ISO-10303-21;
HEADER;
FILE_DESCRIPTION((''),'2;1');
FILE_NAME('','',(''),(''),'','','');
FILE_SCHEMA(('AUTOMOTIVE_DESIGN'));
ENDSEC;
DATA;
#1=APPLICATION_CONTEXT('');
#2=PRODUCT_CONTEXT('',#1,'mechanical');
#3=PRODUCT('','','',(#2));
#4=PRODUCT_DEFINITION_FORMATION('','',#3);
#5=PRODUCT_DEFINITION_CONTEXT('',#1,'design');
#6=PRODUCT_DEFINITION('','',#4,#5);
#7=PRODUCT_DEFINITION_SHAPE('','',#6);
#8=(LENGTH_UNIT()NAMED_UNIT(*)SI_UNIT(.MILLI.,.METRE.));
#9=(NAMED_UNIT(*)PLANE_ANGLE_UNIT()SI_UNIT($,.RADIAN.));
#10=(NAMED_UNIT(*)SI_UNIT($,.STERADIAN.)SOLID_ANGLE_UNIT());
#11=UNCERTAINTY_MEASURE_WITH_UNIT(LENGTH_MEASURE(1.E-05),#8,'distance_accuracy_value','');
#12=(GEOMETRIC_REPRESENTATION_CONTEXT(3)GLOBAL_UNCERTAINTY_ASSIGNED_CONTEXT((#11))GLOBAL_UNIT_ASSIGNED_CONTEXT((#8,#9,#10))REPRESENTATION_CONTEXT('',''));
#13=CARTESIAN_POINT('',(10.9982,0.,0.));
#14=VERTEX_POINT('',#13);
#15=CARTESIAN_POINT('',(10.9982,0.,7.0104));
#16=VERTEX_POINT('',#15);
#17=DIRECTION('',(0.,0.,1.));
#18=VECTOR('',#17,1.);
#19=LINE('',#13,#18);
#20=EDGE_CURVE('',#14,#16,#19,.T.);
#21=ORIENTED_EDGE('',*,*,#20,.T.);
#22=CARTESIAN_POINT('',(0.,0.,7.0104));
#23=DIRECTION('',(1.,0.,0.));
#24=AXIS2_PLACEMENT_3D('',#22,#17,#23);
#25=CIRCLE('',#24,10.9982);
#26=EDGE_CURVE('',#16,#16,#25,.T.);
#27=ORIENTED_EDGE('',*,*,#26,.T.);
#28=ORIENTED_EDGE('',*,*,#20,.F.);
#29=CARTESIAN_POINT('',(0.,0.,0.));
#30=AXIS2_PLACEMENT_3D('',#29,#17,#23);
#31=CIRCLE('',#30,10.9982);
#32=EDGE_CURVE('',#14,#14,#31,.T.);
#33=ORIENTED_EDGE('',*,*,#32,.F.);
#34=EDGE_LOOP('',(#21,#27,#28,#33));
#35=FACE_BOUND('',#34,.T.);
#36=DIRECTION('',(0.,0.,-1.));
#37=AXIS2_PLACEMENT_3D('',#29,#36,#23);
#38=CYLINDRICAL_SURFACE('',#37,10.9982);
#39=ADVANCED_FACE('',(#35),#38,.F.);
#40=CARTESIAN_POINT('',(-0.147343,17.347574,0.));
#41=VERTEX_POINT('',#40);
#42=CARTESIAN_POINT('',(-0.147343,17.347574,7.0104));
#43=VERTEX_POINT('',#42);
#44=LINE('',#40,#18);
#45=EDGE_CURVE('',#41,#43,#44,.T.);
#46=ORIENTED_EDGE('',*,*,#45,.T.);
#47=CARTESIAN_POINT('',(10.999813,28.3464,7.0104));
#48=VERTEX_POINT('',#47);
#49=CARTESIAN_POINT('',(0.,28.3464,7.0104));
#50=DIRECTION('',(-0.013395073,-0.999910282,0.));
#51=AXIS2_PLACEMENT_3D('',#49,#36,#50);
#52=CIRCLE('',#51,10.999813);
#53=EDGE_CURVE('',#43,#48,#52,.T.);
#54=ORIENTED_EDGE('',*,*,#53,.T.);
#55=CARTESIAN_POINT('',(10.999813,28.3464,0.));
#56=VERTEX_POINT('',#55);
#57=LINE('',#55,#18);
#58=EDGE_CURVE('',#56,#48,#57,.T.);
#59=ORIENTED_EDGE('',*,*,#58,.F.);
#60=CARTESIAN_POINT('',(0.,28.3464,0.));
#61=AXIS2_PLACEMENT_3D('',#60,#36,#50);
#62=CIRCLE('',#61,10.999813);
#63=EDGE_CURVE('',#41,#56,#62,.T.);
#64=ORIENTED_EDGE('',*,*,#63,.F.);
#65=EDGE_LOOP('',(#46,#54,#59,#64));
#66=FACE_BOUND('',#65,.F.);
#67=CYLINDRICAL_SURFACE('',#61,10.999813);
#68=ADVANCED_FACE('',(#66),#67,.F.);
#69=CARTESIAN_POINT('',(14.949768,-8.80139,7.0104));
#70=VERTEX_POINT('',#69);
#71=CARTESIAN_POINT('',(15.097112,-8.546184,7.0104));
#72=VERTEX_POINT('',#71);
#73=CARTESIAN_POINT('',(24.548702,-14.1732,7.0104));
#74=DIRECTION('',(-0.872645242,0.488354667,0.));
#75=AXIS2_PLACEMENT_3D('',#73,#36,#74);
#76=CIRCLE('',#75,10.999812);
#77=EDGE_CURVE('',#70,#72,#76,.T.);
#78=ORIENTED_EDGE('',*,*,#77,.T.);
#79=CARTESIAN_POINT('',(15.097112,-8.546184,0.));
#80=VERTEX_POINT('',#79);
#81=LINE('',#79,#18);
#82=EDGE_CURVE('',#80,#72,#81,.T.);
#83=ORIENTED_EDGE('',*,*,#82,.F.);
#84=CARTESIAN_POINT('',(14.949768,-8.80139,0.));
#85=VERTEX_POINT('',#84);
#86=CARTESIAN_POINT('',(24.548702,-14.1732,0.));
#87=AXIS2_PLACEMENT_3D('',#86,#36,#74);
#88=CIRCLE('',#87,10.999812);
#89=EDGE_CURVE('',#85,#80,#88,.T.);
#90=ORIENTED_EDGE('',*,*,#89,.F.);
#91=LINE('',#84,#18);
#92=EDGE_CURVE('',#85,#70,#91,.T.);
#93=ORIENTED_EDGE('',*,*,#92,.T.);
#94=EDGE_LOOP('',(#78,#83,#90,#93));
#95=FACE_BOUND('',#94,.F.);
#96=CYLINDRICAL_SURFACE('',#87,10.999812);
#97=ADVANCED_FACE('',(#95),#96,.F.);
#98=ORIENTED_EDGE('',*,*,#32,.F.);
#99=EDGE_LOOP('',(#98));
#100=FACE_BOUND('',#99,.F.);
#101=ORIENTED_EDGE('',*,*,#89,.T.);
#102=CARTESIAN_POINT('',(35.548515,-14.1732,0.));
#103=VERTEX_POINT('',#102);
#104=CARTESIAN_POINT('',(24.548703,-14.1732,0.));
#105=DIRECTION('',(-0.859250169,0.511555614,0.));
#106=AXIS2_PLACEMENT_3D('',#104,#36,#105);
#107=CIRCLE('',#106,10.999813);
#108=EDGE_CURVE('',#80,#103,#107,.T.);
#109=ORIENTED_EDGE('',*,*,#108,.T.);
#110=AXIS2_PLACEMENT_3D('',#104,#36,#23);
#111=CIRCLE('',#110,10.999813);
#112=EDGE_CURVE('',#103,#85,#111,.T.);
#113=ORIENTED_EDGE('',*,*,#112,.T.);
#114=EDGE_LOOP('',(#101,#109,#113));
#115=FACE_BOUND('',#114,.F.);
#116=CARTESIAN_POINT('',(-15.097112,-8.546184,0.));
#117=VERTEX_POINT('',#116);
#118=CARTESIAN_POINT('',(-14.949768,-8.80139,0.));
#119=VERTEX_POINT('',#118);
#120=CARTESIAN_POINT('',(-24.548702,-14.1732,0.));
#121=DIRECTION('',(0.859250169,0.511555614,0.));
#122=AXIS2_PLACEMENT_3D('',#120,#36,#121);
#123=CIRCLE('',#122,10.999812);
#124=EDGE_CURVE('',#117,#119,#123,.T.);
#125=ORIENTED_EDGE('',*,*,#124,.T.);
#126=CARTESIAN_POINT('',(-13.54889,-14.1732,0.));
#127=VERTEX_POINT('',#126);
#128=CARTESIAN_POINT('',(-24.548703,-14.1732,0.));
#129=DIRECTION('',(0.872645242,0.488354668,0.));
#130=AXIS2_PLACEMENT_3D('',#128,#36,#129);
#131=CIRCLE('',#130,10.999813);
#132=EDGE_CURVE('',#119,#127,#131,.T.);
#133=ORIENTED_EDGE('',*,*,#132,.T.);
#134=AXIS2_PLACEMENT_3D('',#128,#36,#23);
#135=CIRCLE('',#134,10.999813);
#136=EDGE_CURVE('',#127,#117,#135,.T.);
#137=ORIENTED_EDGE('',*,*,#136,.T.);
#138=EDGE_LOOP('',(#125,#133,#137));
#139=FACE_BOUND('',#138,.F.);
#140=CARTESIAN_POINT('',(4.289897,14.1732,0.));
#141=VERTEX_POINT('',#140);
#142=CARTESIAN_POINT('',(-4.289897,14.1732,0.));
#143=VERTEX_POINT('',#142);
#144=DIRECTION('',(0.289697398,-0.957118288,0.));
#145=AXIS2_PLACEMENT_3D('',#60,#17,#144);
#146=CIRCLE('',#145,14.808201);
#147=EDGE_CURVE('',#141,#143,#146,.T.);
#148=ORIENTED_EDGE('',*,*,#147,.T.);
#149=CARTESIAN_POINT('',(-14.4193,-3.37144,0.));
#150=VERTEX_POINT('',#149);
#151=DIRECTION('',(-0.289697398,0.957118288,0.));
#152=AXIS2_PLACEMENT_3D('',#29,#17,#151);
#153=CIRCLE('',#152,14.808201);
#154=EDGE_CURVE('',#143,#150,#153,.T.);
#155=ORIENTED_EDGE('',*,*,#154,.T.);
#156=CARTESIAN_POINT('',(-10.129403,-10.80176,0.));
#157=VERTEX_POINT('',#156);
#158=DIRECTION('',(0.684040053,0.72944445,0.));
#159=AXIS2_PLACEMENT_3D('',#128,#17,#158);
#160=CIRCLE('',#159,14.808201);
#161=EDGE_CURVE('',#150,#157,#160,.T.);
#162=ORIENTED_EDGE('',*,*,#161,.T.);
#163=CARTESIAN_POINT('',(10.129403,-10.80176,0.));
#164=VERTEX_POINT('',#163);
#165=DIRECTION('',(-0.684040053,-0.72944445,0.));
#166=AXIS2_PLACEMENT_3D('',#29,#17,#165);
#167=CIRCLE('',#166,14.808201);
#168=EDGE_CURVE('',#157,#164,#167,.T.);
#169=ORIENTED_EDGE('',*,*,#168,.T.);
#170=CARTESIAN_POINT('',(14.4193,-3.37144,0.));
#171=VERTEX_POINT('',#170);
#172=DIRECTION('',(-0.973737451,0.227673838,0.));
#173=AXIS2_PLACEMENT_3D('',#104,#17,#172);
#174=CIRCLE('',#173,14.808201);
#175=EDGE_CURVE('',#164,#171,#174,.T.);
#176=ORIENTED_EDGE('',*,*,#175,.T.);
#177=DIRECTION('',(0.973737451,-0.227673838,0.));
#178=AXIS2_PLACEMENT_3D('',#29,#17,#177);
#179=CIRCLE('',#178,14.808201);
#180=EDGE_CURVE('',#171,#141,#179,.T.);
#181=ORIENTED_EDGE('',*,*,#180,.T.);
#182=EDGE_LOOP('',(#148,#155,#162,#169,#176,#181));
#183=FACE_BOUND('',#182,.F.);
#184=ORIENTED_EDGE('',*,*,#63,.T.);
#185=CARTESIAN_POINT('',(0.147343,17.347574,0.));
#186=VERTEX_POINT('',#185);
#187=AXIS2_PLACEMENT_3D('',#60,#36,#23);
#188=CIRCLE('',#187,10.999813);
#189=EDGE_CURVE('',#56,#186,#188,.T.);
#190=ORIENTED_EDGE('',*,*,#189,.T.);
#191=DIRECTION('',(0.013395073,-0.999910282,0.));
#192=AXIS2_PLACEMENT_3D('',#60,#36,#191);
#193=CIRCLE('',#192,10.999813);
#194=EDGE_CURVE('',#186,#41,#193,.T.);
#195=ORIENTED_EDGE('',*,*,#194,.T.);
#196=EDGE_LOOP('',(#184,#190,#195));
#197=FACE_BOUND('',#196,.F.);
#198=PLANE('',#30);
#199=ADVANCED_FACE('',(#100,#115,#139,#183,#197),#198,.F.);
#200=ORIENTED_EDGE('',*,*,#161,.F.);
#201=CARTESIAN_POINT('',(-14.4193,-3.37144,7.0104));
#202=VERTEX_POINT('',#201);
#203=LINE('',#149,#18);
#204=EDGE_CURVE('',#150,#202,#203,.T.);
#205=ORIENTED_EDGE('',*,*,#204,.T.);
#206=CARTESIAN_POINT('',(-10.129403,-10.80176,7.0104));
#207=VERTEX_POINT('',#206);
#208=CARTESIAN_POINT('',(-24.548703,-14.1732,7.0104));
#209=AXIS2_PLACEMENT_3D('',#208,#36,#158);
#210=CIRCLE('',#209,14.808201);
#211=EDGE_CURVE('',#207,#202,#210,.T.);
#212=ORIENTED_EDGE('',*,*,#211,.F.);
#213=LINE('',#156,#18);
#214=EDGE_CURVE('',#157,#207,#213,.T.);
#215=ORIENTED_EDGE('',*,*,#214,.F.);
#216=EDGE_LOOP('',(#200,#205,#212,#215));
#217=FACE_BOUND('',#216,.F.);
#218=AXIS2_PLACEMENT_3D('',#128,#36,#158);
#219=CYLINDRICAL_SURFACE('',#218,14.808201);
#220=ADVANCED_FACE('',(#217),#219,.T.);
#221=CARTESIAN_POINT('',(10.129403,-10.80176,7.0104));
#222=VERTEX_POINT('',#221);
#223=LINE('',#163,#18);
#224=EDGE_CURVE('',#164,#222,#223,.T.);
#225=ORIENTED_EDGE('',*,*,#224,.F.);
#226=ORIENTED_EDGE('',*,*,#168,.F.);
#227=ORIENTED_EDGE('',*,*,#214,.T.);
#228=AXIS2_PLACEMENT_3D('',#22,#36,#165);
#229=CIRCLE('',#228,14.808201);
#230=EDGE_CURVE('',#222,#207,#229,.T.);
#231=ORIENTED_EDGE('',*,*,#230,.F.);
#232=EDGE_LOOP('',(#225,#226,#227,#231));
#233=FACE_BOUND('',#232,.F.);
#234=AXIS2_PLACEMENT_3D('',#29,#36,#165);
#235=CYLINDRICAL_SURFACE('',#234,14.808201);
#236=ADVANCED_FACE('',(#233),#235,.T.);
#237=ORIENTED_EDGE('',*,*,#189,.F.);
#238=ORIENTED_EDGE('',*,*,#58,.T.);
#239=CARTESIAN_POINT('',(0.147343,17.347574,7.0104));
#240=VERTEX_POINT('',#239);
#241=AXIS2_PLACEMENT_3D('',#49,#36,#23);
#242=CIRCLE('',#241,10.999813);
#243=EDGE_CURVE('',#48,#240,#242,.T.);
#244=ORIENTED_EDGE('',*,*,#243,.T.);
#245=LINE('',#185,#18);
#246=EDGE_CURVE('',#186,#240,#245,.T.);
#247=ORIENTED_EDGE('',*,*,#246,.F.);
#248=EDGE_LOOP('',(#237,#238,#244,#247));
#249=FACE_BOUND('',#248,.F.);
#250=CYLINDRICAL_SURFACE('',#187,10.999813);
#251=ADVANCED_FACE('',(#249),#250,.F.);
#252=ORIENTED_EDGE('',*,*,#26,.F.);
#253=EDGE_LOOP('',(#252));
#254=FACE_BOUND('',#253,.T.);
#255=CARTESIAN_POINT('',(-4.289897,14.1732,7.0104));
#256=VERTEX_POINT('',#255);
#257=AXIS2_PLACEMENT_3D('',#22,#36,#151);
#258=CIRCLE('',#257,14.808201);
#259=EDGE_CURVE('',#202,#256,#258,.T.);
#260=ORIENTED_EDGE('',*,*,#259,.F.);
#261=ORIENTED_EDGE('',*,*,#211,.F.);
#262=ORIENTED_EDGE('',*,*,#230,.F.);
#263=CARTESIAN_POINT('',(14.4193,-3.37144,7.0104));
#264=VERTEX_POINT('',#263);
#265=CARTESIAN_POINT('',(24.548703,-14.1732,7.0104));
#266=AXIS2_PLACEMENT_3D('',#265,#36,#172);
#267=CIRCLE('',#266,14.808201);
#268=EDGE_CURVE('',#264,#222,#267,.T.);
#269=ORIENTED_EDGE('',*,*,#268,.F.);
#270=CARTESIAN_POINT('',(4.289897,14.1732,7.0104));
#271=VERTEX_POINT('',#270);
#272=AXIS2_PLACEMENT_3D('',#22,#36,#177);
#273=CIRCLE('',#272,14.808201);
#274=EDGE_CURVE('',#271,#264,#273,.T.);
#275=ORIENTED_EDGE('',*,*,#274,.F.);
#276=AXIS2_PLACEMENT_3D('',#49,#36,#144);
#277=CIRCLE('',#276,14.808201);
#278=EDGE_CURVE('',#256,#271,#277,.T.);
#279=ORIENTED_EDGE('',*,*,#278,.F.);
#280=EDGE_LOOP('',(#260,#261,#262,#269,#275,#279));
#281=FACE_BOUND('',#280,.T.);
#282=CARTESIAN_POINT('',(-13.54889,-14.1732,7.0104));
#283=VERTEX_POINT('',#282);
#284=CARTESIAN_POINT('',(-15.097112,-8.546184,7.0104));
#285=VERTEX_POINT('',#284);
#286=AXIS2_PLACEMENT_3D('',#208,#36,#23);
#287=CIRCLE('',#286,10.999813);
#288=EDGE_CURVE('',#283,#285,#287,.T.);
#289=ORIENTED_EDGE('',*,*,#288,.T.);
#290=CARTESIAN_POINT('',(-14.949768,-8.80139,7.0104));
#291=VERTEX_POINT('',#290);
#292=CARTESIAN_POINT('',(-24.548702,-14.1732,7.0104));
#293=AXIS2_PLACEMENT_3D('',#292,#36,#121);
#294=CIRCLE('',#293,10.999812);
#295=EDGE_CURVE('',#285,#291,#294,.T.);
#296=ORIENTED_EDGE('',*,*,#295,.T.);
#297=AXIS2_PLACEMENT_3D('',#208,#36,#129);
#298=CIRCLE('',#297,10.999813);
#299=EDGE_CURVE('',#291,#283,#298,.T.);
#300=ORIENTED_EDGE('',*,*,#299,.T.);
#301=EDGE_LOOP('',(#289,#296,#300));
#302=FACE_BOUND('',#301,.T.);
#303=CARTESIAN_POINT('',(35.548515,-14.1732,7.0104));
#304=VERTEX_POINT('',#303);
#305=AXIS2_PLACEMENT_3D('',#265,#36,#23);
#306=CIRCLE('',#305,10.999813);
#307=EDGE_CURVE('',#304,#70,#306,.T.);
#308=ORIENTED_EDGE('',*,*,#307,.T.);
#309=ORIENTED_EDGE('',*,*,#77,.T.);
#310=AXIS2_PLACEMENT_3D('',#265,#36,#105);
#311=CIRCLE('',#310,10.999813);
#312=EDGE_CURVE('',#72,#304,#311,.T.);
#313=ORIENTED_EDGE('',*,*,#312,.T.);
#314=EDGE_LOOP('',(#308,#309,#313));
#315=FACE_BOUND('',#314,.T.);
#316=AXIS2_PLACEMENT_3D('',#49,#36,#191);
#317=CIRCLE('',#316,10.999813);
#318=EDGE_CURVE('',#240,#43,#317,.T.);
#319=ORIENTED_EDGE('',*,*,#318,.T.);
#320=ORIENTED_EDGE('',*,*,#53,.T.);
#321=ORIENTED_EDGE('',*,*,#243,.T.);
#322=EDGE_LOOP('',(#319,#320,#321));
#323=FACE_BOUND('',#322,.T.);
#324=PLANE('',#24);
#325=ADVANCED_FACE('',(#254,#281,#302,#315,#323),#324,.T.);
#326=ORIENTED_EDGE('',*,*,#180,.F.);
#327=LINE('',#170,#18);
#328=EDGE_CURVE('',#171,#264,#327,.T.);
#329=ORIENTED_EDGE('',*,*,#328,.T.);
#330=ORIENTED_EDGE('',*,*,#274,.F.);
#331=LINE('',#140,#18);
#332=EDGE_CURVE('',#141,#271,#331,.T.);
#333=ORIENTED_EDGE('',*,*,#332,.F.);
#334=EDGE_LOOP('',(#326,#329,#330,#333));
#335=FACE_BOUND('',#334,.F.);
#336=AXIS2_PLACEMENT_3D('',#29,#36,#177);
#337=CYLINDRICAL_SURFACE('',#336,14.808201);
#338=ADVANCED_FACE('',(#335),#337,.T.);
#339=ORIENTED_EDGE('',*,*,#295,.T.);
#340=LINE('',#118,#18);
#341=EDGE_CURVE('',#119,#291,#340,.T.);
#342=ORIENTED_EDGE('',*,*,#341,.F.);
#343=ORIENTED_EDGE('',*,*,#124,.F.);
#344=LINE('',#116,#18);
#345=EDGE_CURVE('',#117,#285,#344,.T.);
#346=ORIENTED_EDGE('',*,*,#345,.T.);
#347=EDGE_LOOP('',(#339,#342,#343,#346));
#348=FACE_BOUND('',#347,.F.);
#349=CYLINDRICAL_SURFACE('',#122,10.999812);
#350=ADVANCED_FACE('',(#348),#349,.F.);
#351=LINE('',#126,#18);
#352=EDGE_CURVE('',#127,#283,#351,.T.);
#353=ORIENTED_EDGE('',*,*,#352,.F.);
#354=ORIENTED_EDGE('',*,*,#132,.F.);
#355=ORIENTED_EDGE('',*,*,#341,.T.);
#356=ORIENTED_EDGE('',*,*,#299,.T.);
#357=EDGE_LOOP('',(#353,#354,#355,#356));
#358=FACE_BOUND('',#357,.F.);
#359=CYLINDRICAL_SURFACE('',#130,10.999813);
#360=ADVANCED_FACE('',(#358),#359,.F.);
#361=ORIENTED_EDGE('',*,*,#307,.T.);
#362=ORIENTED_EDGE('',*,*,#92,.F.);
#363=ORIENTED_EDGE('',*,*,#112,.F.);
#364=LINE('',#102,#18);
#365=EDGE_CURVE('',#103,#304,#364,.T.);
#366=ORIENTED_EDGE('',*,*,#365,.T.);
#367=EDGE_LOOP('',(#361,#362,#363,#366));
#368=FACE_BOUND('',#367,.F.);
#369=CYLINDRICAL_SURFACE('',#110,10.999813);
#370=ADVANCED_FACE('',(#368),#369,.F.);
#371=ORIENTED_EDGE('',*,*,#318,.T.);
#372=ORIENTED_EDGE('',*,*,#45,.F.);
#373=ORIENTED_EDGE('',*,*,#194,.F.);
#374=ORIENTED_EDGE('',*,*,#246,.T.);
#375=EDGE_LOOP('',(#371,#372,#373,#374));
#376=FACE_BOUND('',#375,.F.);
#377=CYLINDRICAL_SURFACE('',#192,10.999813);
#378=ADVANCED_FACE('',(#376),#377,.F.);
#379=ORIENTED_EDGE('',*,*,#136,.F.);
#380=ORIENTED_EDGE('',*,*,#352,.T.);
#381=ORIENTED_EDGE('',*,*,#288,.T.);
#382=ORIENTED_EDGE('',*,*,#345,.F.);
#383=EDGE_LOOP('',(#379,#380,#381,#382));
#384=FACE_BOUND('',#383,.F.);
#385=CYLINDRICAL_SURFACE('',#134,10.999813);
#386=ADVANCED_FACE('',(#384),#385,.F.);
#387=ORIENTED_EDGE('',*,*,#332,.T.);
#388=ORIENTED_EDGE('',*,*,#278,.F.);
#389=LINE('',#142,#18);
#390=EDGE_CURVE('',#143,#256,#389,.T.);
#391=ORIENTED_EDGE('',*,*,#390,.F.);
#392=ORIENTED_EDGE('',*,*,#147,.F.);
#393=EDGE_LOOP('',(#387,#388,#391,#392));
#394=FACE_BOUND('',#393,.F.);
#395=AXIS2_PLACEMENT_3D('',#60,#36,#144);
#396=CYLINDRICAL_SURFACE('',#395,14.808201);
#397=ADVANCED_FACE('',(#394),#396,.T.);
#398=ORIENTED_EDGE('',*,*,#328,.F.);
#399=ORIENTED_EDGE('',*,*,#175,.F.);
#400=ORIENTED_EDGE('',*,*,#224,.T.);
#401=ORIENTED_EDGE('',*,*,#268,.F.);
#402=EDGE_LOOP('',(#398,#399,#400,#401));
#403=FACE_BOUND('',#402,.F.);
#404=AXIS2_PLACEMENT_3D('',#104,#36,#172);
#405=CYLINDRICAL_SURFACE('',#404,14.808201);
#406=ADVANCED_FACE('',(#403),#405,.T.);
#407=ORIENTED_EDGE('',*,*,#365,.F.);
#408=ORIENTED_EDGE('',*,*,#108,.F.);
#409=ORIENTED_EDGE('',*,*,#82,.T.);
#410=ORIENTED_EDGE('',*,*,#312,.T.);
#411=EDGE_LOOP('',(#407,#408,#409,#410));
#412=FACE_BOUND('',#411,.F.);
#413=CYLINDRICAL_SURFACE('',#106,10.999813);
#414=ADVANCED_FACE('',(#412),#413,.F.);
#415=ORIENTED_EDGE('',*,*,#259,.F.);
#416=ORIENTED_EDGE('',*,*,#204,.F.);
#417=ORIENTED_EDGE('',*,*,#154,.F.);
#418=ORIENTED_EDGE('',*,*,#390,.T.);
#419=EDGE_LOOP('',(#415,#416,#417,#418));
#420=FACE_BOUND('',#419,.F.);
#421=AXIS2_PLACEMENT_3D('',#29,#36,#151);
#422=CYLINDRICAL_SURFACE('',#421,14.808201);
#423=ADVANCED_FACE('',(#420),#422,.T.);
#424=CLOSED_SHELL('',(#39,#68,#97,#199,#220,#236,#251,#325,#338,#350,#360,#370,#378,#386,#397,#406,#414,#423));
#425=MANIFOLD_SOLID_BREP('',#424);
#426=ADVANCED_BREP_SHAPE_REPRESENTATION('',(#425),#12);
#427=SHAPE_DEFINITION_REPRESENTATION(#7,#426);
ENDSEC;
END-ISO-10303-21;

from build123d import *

# Parameters (mm, degrees)
F0_R     = 10.9982
F1_DEPTH = 7.0104
F4_DEPTH = 25.146


# Not quite as in the source:
# - a feature of the source that left no trace in its solid (it failed there, or was rolled back) is left out


with BuildPart() as f1:
    # F0 (on Top) → F1 (new body)
    with BuildSketch(Plane.XY):
        with BuildLine():
            ThreePointArc((17.2763619736, 1.5771367083), (15.0239819099, 8.6741), (10.0040214414, 14.1732))
            ThreePointArc((10.0040214414, 14.1732), (0, 45.6946), (-10.0040214414, 14.1732))
            ThreePointArc((-10.0040214414, 14.1732), (-15.0239819099, 8.6741), (-17.2763619736, 1.5771367083))
            ThreePointArc((-17.2763619736, 1.5771367083), (-39.5726844158, -22.8473), (-7.2723405322, -15.7503367083))
            ThreePointArc((-7.2723405322, -15.7503367083), (0, -17.3482), (7.2723405322, -15.7503367083))
            ThreePointArc((7.2723405322, -15.7503367083), (39.5726844158, -22.8473), (17.2763619736, 1.5771367083))
        make_face()
        with BuildLine():
            ThreePointArc((-13.5488898986, -14.1732), (-35.1543992189, -17.0912600791), (-15.0971116601, -8.5461841053))
            ThreePointArc((-15.0971116601, -8.5461841053), (-15.0225853511, -8.6732936964), (-14.9497683707, -8.8013901688))
            ThreePointArc((-14.9497683707, -8.8013901688), (-13.904869688, -11.3974658018), (-13.5488898986, -14.1732))
        make_face(mode=Mode.SUBTRACT)
        with BuildLine():
            ThreePointArc((15.0971116601, -8.5461841053), (27.466762585, -3.567503287), (35.5485151131, -14.1732))
            ThreePointArc((35.5485151131, -14.1732), (21.7729683076, -24.8170328179), (14.9497683707, -8.8013901688))
            ThreePointArc((14.9497683707, -8.8013901688), (15.0225853511, -8.6732936964), (15.0971116601, -8.5461841053))
        make_face(mode=Mode.SUBTRACT)
        Circle(F0_R, mode=Mode.SUBTRACT)
        with BuildLine():
            ThreePointArc((-0.1473432894, 17.3475742741), (-7.7257727387, 36.1763625148), (10.9998126072, 28.3464))
            ThreePointArc((10.9998126072, 28.3464), (7.8299625148, 20.6206272613), (0.1473432894, 17.3475742741))
            ThreePointArc((0.1473432894, 17.3475742741), (0, 17.3465873928), (-0.1473432894, 17.3475742741))
        make_face(mode=Mode.SUBTRACT)
    extrude(amount=F1_DEPTH)

    # F3 (on face) → F4 (cut)
    with BuildSketch(Plane(origin=(0, 0, 0), x_dir=(1, 0, 0), z_dir=(0, 0, -1))):
        with BuildLine():
            ThreePointArc((-10.0040214414, -14.1732), (0, -45.6946), (10.0040214414, -14.1732))
            ThreePointArc((10.0040214414, -14.1732), (15.0239819099, -8.6741), (17.2763619736, -1.5771367083))
            ThreePointArc((17.2763619736, -1.5771367083), (39.5726844158, 22.8473), (7.2723405322, 15.7503367083))
            ThreePointArc((7.2723405322, 15.7503367083), (0, 17.3482), (-7.2723405322, 15.7503367083))
            ThreePointArc((-7.2723405322, 15.7503367083), (-39.5726844158, 22.8473), (-17.2763619736, -1.5771367083))
            ThreePointArc((-17.2763619736, -1.5771367083), (-15.0239819099, -8.6741), (-10.0040214414, -14.1732))
        make_face()
        with BuildLine():
            ThreePointArc((10.1294026029, 10.8017600414), (37.3729807628, 21.5773005039), (14.4192999029, 3.3714399586))
            ThreePointArc((14.4192999029, 3.3714399586), (12.824278257, -7.4041005038), (4.2898973, -14.1732))
            ThreePointArc((4.2898973, -14.1732), (0, -43.1546010077), (-4.2898973, -14.1732))
            ThreePointArc((-4.2898973, -14.1732), (-12.824278257, -7.4041005038), (-14.4192999029, 3.3714399586))
            ThreePointArc((-14.4192999029, 3.3714399586), (-37.3729807628, 21.5773005038), (-10.1294026029, 10.8017600414))
            ThreePointArc((-10.1294026029, 10.8017600414), (0, 14.8082010077), (10.1294026029, 10.8017600414))
        make_face(mode=Mode.SUBTRACT)
    extrude(amount=-F4_DEPTH, mode=Mode.SUBTRACT)


solid = f1.part
